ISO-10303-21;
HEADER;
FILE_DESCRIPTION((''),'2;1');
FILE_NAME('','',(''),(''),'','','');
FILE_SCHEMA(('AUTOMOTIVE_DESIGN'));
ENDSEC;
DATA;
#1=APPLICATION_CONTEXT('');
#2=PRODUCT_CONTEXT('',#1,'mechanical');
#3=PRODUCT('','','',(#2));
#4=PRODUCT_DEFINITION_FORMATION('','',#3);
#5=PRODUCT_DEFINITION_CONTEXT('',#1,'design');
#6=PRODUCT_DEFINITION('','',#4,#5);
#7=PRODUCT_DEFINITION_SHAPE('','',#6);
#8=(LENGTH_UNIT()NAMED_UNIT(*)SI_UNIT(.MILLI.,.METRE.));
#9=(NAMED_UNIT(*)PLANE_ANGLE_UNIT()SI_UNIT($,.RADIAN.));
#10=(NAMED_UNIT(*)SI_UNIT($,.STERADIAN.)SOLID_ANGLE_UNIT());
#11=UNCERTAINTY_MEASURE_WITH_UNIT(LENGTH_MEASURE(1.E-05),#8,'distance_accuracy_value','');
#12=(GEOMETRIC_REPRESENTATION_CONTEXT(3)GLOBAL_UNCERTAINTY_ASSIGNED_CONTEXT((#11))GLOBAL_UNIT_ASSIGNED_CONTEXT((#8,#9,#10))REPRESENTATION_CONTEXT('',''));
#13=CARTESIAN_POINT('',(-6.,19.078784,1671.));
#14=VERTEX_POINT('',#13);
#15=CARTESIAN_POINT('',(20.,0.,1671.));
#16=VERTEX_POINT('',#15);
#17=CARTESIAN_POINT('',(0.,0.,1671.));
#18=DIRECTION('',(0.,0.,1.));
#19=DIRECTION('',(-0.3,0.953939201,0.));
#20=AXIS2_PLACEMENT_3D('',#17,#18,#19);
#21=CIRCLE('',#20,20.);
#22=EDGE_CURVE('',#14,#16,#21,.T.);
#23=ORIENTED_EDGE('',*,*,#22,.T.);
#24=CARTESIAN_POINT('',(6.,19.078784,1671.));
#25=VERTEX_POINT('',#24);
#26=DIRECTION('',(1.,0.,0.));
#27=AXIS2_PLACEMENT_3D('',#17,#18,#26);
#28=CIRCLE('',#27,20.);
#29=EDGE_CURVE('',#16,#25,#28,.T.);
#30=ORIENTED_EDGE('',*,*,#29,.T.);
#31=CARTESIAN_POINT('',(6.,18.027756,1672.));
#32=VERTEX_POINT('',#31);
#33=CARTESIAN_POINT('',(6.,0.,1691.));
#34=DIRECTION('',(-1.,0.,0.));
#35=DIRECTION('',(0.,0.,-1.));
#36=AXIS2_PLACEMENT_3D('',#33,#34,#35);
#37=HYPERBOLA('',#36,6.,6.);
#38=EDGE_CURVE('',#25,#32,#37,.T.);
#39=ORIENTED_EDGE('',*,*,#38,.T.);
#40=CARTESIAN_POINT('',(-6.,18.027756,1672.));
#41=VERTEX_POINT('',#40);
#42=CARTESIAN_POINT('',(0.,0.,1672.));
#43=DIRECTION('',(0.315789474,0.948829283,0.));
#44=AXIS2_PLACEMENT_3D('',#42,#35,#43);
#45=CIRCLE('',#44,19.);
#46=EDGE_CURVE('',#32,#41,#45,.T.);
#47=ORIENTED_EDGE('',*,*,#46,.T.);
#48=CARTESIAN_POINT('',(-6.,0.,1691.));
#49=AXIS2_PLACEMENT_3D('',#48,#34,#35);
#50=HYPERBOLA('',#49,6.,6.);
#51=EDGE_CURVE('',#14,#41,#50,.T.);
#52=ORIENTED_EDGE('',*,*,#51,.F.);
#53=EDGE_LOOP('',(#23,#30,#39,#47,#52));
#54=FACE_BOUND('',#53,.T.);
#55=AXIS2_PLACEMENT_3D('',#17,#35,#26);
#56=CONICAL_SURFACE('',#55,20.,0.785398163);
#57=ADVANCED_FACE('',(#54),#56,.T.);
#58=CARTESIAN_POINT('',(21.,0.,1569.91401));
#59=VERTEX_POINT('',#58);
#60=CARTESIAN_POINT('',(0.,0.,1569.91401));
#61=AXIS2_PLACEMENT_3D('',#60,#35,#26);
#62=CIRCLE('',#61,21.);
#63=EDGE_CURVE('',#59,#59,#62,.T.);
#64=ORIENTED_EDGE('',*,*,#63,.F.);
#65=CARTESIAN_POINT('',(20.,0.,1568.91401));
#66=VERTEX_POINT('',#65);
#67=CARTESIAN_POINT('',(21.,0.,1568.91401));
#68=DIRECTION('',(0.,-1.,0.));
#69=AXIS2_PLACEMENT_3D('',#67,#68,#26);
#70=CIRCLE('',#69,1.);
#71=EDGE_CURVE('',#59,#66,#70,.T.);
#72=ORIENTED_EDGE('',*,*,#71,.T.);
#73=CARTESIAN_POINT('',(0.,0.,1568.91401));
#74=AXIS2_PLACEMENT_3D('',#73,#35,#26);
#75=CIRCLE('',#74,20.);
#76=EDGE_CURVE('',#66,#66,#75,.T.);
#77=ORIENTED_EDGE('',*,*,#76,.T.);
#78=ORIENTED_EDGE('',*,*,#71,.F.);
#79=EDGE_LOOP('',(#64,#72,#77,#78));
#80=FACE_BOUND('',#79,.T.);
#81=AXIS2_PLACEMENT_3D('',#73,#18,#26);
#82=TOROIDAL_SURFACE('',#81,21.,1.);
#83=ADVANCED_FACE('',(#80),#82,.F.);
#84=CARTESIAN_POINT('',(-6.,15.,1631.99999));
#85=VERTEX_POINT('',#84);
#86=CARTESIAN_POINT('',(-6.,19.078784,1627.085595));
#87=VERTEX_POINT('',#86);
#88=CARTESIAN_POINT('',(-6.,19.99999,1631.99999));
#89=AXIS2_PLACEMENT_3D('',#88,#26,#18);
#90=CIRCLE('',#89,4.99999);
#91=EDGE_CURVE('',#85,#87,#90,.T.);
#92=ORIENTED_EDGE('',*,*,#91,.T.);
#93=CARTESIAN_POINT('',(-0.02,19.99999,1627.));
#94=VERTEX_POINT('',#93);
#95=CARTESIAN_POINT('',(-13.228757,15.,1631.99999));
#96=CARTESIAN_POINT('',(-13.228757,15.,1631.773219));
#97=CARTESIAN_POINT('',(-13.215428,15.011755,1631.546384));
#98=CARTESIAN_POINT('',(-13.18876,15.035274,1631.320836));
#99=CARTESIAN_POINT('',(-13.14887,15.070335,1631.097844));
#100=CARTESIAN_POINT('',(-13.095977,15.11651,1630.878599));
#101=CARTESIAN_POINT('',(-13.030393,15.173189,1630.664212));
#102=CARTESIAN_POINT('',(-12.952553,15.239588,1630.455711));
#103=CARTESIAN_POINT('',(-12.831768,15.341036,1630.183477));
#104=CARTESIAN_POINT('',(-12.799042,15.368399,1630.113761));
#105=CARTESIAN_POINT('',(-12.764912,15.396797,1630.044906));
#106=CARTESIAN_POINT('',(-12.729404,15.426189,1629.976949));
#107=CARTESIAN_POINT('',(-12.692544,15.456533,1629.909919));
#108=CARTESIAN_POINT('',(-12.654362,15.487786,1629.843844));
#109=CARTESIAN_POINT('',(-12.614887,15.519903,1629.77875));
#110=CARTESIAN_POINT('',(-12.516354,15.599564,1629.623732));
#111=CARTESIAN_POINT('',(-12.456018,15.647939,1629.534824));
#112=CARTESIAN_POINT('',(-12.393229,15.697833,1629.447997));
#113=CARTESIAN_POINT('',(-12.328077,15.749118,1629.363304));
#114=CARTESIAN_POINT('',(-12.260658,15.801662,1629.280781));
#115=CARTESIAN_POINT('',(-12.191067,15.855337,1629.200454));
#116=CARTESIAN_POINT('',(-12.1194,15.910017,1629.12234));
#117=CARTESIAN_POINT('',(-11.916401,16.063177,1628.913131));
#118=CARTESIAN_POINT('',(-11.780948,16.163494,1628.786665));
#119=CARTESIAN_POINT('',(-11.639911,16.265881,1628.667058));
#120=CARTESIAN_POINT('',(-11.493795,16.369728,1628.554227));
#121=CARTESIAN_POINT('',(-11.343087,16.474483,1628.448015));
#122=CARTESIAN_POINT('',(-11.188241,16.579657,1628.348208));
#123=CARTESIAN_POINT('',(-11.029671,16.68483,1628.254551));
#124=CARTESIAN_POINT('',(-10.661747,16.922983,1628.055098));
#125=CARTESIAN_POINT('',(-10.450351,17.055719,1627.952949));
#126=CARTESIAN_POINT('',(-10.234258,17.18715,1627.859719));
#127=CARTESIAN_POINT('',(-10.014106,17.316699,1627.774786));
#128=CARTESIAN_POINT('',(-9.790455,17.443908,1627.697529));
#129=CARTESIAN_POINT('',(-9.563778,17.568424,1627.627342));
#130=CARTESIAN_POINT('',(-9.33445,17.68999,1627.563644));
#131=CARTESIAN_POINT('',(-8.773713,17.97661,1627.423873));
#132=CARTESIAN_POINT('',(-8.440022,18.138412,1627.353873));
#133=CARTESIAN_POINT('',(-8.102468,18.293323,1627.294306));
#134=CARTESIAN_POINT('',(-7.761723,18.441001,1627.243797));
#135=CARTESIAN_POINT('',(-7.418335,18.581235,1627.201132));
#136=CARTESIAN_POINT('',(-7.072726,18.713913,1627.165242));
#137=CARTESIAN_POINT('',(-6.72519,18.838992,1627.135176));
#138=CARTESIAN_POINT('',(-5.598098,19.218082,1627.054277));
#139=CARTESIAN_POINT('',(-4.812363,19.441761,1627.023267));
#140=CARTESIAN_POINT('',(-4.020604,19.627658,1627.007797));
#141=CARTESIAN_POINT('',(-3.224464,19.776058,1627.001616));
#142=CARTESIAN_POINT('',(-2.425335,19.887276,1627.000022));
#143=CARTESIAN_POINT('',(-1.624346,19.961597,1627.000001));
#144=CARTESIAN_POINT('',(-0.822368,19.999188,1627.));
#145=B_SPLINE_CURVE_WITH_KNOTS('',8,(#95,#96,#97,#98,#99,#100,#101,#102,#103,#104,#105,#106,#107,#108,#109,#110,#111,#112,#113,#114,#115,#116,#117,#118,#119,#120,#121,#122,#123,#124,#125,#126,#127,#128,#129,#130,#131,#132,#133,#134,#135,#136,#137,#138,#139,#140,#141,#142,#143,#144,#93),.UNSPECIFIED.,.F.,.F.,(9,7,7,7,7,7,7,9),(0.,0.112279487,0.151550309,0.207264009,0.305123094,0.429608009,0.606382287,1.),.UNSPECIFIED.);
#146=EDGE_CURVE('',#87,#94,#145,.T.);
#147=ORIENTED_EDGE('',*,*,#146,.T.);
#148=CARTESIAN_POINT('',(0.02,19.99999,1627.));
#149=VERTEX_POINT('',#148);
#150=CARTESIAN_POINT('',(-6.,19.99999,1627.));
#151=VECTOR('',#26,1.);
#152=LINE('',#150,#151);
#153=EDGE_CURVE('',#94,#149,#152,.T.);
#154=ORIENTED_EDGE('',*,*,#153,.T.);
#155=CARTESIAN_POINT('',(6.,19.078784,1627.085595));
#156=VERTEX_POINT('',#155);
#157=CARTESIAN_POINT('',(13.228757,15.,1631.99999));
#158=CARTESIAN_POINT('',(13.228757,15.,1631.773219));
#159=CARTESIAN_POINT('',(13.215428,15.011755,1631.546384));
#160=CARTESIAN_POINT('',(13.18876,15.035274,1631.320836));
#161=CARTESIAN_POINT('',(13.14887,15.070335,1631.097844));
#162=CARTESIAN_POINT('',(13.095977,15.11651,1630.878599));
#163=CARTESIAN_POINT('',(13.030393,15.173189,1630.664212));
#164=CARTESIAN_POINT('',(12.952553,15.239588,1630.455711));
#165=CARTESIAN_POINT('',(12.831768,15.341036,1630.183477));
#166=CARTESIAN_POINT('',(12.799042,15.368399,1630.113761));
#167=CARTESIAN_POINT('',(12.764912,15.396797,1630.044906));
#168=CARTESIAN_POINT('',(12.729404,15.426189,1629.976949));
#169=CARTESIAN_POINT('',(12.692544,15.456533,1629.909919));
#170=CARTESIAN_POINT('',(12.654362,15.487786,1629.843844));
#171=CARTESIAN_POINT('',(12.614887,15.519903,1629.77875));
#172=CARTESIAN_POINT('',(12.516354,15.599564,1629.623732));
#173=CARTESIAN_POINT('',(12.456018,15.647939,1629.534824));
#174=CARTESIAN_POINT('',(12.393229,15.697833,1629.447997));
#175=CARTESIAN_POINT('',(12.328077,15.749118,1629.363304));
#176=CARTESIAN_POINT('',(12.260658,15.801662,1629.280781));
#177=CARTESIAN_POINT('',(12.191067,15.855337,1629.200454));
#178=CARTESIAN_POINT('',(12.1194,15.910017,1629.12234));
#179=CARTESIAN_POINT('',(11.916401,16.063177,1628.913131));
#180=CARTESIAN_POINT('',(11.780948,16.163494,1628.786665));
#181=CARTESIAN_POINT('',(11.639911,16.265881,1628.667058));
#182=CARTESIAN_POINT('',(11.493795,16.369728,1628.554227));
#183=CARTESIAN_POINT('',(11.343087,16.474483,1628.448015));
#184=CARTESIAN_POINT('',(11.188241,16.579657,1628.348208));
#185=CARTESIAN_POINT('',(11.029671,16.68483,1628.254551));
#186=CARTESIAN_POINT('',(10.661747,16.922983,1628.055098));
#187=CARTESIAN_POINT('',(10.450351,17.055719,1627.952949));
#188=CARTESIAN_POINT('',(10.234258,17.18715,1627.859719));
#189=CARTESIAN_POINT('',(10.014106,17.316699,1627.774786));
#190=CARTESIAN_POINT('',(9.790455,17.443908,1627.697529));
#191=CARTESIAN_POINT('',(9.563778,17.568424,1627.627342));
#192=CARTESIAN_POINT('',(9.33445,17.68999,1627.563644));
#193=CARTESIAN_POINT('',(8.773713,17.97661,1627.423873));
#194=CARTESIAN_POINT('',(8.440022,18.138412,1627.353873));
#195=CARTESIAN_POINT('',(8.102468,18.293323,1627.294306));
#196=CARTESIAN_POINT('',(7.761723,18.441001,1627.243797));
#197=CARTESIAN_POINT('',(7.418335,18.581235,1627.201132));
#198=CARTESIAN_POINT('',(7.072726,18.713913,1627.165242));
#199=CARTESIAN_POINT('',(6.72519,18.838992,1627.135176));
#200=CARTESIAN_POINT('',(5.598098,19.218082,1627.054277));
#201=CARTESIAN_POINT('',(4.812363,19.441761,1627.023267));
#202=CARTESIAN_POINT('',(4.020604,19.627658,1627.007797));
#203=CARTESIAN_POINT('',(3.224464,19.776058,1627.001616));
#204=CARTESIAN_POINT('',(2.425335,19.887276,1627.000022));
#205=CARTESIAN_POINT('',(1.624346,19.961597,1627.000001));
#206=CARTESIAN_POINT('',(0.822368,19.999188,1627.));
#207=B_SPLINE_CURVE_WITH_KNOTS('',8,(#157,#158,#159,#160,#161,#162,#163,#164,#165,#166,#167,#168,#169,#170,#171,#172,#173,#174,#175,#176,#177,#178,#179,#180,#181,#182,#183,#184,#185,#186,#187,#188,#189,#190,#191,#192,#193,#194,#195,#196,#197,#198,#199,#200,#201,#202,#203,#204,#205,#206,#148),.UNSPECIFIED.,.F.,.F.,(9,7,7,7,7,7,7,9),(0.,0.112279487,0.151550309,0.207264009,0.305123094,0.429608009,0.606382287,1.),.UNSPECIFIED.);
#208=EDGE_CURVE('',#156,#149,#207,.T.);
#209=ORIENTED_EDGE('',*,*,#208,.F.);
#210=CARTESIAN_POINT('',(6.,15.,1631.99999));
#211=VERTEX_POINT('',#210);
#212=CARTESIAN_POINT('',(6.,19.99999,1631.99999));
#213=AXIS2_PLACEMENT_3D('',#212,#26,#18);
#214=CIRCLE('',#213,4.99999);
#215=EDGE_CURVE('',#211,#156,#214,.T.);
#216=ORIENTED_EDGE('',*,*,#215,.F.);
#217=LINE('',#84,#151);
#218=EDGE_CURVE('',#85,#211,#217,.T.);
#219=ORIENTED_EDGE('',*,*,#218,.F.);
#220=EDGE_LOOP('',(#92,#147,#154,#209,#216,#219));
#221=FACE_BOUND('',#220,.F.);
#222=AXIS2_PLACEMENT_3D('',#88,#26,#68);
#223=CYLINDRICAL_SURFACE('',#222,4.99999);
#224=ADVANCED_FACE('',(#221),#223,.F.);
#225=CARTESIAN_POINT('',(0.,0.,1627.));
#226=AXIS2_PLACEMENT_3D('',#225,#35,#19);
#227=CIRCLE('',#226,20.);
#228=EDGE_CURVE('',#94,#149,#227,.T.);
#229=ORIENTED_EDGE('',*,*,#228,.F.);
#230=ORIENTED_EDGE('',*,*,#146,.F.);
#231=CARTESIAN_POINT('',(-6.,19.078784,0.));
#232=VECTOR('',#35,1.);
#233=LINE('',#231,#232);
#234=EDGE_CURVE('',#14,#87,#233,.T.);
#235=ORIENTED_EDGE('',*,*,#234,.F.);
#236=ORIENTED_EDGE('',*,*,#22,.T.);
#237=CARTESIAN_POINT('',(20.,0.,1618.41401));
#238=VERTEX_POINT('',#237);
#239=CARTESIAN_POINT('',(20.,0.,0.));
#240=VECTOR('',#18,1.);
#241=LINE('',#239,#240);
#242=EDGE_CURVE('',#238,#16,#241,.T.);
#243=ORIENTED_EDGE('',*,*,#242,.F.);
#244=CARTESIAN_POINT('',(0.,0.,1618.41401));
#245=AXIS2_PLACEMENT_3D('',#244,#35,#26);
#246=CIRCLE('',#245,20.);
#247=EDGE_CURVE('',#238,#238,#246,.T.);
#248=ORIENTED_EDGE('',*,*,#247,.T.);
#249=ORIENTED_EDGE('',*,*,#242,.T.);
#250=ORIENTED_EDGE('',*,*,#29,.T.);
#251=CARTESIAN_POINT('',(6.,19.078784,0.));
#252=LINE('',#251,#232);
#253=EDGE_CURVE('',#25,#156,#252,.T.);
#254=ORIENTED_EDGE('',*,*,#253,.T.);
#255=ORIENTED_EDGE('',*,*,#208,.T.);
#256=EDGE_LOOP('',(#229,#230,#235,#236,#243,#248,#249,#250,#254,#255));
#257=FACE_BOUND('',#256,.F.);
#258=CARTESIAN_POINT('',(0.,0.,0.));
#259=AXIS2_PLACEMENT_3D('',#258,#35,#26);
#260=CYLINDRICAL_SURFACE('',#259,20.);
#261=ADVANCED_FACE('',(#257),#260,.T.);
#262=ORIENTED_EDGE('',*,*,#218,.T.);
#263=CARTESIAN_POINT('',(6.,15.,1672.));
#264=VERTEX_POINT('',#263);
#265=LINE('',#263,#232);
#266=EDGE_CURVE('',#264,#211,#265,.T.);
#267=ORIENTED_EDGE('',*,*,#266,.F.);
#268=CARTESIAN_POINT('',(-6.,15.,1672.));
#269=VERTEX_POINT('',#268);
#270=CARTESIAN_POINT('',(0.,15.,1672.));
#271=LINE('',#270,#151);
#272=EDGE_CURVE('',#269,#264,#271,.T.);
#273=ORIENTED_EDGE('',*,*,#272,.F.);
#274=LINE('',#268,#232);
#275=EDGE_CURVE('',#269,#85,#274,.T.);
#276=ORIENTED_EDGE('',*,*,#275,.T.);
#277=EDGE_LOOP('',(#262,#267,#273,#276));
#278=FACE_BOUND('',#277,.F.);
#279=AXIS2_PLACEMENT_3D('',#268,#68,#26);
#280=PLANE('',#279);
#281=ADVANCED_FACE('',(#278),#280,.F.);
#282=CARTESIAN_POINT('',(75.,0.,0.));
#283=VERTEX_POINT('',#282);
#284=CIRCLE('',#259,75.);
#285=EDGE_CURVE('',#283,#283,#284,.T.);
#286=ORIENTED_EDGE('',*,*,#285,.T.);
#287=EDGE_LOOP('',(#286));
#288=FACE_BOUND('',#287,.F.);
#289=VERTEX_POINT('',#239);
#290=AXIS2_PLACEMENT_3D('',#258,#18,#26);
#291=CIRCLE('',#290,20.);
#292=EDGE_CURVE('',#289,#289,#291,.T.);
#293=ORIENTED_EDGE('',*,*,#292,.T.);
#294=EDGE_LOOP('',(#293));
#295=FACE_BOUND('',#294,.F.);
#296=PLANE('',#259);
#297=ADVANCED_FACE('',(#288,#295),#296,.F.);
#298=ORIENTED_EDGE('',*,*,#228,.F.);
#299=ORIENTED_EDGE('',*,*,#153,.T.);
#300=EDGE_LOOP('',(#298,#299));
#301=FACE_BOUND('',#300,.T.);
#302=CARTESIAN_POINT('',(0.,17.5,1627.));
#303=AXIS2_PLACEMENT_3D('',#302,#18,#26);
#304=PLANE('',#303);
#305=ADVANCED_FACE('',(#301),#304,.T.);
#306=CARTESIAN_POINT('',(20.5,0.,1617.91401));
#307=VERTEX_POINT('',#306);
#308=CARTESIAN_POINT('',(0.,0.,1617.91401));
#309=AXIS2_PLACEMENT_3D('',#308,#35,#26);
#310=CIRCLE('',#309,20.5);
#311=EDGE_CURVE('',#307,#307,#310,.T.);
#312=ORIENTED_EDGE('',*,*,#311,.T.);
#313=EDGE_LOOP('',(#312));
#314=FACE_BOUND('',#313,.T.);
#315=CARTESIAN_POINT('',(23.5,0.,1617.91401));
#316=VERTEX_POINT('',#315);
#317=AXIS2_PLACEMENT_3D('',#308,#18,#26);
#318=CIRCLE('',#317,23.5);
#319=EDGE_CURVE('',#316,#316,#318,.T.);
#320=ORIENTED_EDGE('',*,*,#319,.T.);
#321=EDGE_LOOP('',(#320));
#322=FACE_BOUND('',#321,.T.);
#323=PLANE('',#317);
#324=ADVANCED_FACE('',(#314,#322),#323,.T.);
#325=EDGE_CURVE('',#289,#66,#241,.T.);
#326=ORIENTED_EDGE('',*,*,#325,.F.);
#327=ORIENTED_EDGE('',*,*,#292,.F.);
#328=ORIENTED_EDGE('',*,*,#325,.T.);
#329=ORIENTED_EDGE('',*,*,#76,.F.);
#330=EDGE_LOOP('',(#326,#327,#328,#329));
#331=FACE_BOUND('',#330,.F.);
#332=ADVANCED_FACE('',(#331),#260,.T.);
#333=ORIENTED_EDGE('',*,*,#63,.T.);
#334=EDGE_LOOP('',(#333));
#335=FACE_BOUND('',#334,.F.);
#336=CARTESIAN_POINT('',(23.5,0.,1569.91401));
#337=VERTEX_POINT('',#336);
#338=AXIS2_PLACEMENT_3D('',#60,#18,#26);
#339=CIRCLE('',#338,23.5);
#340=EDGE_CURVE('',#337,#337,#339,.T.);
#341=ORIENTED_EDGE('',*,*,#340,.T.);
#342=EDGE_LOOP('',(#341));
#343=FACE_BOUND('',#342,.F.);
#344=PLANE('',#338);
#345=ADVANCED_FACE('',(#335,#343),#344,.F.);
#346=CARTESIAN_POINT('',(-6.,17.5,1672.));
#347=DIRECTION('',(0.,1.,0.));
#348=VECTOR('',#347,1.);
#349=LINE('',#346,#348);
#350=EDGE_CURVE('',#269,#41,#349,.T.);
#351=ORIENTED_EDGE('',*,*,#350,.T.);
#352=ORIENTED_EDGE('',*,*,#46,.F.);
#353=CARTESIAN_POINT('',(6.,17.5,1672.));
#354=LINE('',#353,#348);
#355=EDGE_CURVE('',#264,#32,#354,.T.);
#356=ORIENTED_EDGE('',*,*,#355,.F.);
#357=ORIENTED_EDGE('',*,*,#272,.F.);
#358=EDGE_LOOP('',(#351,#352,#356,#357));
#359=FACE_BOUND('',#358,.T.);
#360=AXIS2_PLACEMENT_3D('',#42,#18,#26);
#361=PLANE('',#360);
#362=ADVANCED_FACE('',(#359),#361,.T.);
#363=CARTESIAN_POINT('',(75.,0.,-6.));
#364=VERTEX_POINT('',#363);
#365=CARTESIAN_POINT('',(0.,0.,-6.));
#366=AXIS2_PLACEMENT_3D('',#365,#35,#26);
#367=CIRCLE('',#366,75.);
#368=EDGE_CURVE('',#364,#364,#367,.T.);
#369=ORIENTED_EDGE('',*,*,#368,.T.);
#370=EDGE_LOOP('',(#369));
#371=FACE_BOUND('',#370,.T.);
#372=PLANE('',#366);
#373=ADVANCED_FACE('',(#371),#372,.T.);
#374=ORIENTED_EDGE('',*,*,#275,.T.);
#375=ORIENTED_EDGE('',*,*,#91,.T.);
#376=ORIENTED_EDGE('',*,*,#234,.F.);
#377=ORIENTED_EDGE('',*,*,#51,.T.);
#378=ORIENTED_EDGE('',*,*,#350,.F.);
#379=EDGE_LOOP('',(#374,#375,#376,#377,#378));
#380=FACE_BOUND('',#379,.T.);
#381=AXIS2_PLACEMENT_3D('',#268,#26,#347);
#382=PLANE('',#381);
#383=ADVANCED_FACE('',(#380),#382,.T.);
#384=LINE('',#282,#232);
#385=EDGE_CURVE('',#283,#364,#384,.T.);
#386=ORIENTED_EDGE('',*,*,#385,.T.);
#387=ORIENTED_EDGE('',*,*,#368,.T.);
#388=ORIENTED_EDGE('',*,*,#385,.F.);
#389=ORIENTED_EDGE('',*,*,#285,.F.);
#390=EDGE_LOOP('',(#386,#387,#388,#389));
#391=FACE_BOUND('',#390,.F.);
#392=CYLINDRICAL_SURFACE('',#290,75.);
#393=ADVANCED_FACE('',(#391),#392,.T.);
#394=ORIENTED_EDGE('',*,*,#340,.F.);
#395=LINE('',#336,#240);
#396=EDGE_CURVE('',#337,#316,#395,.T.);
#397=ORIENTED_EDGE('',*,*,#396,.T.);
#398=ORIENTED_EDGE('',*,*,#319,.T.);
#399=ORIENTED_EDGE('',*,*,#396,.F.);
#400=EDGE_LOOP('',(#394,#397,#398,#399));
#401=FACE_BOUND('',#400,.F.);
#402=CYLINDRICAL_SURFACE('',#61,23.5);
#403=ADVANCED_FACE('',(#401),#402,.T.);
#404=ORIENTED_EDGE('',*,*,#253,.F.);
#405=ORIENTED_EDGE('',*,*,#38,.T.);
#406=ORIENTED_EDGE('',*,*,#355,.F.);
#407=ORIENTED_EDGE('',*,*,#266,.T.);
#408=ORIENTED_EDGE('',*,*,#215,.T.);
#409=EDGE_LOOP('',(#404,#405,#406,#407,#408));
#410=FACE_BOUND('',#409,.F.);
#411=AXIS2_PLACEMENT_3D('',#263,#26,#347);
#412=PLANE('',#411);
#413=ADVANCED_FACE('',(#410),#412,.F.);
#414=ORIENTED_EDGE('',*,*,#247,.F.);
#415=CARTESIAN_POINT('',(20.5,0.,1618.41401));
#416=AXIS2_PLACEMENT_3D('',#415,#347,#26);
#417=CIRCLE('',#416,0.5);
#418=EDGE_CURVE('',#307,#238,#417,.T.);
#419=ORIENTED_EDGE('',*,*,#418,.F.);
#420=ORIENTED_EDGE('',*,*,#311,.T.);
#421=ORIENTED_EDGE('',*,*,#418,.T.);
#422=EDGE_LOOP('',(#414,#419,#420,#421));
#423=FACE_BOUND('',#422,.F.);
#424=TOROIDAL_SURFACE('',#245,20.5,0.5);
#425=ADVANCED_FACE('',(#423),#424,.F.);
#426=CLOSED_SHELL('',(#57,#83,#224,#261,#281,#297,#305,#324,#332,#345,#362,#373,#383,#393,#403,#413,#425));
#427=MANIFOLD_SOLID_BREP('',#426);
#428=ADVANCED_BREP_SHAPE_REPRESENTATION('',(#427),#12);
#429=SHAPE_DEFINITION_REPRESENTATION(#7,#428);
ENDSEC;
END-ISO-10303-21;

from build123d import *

# Parameters (mm, degrees)
F0_R      = 20
F1_DEPTH  = 1672
F2_R      = 75
F3_DEPTH  = 6
F5_R      = 23.5
F6_DEPTH  = 48
F7_R      = 0.5
F8_R      = 1
F9_W      = 12
F9_H      = 5
F10_DEPTH = 45
F11_R     = 4.99999
F12_SIZE2 = 1
F12_SIZE  = 1


# Not quite as in the source:
# - a fillet or chamfer is up to 0.001 mm smaller than in the source, because OpenCascade refuses the exact size


with BuildPart() as f1:
    # F0 (on Top) → F1 (new body)
    with BuildSketch(Plane.XY):
        Circle(F0_R)
    extrude(amount=F1_DEPTH)

    # F2 (on face) → F3 (join)
    with BuildSketch(Plane(origin=(0, 0, 0), x_dir=(1, 0, 0), z_dir=(0, 0, -1))):
        Circle(F2_R)
    extrude(amount=F3_DEPTH)

    # F5 (on offset) → F6 (join)
    with BuildSketch(Plane.XY.offset(1569.91401)):
        Circle(F5_R)
    extrude(amount=F6_DEPTH)

    # F7
    f7_edges = [f1.edges().sort_by_distance(p)[0] for p in [
        (-20, 0, 1617.91401),
    ]]
    fillet(f7_edges, radius=F7_R)

    # F8
    f8_edges = [f1.edges().sort_by_distance(p)[0] for p in [
        (-20, 0, 1569.91401),
    ]]
    fillet(f8_edges, radius=F8_R)

    # F9 (on face) → F10 (cut)
    with BuildSketch(Plane.XY.offset(1672)):
        with Locations((0, 17.5)):
            Rectangle(F9_W, F9_H)
    extrude(amount=-F10_DEPTH, mode=Mode.SUBTRACT)

    # F11 (radius 5 in the source; OpenCascade refuses exactly that, so slightly less here)
    f11_edges = [f1.edges().sort_by_distance(p)[0] for p in [
        (0, 15, 1627),
    ]]
    fillet(f11_edges, radius=F11_R)

    # F12
    f12_edges = [f1.edges().sort_by_distance(p)[0] for p in [
        (-11.83216, -16.124515, 1672),
    ]]
    chamfer(f12_edges, length=F12_SIZE, length2=F12_SIZE2)


solid = f1.part
